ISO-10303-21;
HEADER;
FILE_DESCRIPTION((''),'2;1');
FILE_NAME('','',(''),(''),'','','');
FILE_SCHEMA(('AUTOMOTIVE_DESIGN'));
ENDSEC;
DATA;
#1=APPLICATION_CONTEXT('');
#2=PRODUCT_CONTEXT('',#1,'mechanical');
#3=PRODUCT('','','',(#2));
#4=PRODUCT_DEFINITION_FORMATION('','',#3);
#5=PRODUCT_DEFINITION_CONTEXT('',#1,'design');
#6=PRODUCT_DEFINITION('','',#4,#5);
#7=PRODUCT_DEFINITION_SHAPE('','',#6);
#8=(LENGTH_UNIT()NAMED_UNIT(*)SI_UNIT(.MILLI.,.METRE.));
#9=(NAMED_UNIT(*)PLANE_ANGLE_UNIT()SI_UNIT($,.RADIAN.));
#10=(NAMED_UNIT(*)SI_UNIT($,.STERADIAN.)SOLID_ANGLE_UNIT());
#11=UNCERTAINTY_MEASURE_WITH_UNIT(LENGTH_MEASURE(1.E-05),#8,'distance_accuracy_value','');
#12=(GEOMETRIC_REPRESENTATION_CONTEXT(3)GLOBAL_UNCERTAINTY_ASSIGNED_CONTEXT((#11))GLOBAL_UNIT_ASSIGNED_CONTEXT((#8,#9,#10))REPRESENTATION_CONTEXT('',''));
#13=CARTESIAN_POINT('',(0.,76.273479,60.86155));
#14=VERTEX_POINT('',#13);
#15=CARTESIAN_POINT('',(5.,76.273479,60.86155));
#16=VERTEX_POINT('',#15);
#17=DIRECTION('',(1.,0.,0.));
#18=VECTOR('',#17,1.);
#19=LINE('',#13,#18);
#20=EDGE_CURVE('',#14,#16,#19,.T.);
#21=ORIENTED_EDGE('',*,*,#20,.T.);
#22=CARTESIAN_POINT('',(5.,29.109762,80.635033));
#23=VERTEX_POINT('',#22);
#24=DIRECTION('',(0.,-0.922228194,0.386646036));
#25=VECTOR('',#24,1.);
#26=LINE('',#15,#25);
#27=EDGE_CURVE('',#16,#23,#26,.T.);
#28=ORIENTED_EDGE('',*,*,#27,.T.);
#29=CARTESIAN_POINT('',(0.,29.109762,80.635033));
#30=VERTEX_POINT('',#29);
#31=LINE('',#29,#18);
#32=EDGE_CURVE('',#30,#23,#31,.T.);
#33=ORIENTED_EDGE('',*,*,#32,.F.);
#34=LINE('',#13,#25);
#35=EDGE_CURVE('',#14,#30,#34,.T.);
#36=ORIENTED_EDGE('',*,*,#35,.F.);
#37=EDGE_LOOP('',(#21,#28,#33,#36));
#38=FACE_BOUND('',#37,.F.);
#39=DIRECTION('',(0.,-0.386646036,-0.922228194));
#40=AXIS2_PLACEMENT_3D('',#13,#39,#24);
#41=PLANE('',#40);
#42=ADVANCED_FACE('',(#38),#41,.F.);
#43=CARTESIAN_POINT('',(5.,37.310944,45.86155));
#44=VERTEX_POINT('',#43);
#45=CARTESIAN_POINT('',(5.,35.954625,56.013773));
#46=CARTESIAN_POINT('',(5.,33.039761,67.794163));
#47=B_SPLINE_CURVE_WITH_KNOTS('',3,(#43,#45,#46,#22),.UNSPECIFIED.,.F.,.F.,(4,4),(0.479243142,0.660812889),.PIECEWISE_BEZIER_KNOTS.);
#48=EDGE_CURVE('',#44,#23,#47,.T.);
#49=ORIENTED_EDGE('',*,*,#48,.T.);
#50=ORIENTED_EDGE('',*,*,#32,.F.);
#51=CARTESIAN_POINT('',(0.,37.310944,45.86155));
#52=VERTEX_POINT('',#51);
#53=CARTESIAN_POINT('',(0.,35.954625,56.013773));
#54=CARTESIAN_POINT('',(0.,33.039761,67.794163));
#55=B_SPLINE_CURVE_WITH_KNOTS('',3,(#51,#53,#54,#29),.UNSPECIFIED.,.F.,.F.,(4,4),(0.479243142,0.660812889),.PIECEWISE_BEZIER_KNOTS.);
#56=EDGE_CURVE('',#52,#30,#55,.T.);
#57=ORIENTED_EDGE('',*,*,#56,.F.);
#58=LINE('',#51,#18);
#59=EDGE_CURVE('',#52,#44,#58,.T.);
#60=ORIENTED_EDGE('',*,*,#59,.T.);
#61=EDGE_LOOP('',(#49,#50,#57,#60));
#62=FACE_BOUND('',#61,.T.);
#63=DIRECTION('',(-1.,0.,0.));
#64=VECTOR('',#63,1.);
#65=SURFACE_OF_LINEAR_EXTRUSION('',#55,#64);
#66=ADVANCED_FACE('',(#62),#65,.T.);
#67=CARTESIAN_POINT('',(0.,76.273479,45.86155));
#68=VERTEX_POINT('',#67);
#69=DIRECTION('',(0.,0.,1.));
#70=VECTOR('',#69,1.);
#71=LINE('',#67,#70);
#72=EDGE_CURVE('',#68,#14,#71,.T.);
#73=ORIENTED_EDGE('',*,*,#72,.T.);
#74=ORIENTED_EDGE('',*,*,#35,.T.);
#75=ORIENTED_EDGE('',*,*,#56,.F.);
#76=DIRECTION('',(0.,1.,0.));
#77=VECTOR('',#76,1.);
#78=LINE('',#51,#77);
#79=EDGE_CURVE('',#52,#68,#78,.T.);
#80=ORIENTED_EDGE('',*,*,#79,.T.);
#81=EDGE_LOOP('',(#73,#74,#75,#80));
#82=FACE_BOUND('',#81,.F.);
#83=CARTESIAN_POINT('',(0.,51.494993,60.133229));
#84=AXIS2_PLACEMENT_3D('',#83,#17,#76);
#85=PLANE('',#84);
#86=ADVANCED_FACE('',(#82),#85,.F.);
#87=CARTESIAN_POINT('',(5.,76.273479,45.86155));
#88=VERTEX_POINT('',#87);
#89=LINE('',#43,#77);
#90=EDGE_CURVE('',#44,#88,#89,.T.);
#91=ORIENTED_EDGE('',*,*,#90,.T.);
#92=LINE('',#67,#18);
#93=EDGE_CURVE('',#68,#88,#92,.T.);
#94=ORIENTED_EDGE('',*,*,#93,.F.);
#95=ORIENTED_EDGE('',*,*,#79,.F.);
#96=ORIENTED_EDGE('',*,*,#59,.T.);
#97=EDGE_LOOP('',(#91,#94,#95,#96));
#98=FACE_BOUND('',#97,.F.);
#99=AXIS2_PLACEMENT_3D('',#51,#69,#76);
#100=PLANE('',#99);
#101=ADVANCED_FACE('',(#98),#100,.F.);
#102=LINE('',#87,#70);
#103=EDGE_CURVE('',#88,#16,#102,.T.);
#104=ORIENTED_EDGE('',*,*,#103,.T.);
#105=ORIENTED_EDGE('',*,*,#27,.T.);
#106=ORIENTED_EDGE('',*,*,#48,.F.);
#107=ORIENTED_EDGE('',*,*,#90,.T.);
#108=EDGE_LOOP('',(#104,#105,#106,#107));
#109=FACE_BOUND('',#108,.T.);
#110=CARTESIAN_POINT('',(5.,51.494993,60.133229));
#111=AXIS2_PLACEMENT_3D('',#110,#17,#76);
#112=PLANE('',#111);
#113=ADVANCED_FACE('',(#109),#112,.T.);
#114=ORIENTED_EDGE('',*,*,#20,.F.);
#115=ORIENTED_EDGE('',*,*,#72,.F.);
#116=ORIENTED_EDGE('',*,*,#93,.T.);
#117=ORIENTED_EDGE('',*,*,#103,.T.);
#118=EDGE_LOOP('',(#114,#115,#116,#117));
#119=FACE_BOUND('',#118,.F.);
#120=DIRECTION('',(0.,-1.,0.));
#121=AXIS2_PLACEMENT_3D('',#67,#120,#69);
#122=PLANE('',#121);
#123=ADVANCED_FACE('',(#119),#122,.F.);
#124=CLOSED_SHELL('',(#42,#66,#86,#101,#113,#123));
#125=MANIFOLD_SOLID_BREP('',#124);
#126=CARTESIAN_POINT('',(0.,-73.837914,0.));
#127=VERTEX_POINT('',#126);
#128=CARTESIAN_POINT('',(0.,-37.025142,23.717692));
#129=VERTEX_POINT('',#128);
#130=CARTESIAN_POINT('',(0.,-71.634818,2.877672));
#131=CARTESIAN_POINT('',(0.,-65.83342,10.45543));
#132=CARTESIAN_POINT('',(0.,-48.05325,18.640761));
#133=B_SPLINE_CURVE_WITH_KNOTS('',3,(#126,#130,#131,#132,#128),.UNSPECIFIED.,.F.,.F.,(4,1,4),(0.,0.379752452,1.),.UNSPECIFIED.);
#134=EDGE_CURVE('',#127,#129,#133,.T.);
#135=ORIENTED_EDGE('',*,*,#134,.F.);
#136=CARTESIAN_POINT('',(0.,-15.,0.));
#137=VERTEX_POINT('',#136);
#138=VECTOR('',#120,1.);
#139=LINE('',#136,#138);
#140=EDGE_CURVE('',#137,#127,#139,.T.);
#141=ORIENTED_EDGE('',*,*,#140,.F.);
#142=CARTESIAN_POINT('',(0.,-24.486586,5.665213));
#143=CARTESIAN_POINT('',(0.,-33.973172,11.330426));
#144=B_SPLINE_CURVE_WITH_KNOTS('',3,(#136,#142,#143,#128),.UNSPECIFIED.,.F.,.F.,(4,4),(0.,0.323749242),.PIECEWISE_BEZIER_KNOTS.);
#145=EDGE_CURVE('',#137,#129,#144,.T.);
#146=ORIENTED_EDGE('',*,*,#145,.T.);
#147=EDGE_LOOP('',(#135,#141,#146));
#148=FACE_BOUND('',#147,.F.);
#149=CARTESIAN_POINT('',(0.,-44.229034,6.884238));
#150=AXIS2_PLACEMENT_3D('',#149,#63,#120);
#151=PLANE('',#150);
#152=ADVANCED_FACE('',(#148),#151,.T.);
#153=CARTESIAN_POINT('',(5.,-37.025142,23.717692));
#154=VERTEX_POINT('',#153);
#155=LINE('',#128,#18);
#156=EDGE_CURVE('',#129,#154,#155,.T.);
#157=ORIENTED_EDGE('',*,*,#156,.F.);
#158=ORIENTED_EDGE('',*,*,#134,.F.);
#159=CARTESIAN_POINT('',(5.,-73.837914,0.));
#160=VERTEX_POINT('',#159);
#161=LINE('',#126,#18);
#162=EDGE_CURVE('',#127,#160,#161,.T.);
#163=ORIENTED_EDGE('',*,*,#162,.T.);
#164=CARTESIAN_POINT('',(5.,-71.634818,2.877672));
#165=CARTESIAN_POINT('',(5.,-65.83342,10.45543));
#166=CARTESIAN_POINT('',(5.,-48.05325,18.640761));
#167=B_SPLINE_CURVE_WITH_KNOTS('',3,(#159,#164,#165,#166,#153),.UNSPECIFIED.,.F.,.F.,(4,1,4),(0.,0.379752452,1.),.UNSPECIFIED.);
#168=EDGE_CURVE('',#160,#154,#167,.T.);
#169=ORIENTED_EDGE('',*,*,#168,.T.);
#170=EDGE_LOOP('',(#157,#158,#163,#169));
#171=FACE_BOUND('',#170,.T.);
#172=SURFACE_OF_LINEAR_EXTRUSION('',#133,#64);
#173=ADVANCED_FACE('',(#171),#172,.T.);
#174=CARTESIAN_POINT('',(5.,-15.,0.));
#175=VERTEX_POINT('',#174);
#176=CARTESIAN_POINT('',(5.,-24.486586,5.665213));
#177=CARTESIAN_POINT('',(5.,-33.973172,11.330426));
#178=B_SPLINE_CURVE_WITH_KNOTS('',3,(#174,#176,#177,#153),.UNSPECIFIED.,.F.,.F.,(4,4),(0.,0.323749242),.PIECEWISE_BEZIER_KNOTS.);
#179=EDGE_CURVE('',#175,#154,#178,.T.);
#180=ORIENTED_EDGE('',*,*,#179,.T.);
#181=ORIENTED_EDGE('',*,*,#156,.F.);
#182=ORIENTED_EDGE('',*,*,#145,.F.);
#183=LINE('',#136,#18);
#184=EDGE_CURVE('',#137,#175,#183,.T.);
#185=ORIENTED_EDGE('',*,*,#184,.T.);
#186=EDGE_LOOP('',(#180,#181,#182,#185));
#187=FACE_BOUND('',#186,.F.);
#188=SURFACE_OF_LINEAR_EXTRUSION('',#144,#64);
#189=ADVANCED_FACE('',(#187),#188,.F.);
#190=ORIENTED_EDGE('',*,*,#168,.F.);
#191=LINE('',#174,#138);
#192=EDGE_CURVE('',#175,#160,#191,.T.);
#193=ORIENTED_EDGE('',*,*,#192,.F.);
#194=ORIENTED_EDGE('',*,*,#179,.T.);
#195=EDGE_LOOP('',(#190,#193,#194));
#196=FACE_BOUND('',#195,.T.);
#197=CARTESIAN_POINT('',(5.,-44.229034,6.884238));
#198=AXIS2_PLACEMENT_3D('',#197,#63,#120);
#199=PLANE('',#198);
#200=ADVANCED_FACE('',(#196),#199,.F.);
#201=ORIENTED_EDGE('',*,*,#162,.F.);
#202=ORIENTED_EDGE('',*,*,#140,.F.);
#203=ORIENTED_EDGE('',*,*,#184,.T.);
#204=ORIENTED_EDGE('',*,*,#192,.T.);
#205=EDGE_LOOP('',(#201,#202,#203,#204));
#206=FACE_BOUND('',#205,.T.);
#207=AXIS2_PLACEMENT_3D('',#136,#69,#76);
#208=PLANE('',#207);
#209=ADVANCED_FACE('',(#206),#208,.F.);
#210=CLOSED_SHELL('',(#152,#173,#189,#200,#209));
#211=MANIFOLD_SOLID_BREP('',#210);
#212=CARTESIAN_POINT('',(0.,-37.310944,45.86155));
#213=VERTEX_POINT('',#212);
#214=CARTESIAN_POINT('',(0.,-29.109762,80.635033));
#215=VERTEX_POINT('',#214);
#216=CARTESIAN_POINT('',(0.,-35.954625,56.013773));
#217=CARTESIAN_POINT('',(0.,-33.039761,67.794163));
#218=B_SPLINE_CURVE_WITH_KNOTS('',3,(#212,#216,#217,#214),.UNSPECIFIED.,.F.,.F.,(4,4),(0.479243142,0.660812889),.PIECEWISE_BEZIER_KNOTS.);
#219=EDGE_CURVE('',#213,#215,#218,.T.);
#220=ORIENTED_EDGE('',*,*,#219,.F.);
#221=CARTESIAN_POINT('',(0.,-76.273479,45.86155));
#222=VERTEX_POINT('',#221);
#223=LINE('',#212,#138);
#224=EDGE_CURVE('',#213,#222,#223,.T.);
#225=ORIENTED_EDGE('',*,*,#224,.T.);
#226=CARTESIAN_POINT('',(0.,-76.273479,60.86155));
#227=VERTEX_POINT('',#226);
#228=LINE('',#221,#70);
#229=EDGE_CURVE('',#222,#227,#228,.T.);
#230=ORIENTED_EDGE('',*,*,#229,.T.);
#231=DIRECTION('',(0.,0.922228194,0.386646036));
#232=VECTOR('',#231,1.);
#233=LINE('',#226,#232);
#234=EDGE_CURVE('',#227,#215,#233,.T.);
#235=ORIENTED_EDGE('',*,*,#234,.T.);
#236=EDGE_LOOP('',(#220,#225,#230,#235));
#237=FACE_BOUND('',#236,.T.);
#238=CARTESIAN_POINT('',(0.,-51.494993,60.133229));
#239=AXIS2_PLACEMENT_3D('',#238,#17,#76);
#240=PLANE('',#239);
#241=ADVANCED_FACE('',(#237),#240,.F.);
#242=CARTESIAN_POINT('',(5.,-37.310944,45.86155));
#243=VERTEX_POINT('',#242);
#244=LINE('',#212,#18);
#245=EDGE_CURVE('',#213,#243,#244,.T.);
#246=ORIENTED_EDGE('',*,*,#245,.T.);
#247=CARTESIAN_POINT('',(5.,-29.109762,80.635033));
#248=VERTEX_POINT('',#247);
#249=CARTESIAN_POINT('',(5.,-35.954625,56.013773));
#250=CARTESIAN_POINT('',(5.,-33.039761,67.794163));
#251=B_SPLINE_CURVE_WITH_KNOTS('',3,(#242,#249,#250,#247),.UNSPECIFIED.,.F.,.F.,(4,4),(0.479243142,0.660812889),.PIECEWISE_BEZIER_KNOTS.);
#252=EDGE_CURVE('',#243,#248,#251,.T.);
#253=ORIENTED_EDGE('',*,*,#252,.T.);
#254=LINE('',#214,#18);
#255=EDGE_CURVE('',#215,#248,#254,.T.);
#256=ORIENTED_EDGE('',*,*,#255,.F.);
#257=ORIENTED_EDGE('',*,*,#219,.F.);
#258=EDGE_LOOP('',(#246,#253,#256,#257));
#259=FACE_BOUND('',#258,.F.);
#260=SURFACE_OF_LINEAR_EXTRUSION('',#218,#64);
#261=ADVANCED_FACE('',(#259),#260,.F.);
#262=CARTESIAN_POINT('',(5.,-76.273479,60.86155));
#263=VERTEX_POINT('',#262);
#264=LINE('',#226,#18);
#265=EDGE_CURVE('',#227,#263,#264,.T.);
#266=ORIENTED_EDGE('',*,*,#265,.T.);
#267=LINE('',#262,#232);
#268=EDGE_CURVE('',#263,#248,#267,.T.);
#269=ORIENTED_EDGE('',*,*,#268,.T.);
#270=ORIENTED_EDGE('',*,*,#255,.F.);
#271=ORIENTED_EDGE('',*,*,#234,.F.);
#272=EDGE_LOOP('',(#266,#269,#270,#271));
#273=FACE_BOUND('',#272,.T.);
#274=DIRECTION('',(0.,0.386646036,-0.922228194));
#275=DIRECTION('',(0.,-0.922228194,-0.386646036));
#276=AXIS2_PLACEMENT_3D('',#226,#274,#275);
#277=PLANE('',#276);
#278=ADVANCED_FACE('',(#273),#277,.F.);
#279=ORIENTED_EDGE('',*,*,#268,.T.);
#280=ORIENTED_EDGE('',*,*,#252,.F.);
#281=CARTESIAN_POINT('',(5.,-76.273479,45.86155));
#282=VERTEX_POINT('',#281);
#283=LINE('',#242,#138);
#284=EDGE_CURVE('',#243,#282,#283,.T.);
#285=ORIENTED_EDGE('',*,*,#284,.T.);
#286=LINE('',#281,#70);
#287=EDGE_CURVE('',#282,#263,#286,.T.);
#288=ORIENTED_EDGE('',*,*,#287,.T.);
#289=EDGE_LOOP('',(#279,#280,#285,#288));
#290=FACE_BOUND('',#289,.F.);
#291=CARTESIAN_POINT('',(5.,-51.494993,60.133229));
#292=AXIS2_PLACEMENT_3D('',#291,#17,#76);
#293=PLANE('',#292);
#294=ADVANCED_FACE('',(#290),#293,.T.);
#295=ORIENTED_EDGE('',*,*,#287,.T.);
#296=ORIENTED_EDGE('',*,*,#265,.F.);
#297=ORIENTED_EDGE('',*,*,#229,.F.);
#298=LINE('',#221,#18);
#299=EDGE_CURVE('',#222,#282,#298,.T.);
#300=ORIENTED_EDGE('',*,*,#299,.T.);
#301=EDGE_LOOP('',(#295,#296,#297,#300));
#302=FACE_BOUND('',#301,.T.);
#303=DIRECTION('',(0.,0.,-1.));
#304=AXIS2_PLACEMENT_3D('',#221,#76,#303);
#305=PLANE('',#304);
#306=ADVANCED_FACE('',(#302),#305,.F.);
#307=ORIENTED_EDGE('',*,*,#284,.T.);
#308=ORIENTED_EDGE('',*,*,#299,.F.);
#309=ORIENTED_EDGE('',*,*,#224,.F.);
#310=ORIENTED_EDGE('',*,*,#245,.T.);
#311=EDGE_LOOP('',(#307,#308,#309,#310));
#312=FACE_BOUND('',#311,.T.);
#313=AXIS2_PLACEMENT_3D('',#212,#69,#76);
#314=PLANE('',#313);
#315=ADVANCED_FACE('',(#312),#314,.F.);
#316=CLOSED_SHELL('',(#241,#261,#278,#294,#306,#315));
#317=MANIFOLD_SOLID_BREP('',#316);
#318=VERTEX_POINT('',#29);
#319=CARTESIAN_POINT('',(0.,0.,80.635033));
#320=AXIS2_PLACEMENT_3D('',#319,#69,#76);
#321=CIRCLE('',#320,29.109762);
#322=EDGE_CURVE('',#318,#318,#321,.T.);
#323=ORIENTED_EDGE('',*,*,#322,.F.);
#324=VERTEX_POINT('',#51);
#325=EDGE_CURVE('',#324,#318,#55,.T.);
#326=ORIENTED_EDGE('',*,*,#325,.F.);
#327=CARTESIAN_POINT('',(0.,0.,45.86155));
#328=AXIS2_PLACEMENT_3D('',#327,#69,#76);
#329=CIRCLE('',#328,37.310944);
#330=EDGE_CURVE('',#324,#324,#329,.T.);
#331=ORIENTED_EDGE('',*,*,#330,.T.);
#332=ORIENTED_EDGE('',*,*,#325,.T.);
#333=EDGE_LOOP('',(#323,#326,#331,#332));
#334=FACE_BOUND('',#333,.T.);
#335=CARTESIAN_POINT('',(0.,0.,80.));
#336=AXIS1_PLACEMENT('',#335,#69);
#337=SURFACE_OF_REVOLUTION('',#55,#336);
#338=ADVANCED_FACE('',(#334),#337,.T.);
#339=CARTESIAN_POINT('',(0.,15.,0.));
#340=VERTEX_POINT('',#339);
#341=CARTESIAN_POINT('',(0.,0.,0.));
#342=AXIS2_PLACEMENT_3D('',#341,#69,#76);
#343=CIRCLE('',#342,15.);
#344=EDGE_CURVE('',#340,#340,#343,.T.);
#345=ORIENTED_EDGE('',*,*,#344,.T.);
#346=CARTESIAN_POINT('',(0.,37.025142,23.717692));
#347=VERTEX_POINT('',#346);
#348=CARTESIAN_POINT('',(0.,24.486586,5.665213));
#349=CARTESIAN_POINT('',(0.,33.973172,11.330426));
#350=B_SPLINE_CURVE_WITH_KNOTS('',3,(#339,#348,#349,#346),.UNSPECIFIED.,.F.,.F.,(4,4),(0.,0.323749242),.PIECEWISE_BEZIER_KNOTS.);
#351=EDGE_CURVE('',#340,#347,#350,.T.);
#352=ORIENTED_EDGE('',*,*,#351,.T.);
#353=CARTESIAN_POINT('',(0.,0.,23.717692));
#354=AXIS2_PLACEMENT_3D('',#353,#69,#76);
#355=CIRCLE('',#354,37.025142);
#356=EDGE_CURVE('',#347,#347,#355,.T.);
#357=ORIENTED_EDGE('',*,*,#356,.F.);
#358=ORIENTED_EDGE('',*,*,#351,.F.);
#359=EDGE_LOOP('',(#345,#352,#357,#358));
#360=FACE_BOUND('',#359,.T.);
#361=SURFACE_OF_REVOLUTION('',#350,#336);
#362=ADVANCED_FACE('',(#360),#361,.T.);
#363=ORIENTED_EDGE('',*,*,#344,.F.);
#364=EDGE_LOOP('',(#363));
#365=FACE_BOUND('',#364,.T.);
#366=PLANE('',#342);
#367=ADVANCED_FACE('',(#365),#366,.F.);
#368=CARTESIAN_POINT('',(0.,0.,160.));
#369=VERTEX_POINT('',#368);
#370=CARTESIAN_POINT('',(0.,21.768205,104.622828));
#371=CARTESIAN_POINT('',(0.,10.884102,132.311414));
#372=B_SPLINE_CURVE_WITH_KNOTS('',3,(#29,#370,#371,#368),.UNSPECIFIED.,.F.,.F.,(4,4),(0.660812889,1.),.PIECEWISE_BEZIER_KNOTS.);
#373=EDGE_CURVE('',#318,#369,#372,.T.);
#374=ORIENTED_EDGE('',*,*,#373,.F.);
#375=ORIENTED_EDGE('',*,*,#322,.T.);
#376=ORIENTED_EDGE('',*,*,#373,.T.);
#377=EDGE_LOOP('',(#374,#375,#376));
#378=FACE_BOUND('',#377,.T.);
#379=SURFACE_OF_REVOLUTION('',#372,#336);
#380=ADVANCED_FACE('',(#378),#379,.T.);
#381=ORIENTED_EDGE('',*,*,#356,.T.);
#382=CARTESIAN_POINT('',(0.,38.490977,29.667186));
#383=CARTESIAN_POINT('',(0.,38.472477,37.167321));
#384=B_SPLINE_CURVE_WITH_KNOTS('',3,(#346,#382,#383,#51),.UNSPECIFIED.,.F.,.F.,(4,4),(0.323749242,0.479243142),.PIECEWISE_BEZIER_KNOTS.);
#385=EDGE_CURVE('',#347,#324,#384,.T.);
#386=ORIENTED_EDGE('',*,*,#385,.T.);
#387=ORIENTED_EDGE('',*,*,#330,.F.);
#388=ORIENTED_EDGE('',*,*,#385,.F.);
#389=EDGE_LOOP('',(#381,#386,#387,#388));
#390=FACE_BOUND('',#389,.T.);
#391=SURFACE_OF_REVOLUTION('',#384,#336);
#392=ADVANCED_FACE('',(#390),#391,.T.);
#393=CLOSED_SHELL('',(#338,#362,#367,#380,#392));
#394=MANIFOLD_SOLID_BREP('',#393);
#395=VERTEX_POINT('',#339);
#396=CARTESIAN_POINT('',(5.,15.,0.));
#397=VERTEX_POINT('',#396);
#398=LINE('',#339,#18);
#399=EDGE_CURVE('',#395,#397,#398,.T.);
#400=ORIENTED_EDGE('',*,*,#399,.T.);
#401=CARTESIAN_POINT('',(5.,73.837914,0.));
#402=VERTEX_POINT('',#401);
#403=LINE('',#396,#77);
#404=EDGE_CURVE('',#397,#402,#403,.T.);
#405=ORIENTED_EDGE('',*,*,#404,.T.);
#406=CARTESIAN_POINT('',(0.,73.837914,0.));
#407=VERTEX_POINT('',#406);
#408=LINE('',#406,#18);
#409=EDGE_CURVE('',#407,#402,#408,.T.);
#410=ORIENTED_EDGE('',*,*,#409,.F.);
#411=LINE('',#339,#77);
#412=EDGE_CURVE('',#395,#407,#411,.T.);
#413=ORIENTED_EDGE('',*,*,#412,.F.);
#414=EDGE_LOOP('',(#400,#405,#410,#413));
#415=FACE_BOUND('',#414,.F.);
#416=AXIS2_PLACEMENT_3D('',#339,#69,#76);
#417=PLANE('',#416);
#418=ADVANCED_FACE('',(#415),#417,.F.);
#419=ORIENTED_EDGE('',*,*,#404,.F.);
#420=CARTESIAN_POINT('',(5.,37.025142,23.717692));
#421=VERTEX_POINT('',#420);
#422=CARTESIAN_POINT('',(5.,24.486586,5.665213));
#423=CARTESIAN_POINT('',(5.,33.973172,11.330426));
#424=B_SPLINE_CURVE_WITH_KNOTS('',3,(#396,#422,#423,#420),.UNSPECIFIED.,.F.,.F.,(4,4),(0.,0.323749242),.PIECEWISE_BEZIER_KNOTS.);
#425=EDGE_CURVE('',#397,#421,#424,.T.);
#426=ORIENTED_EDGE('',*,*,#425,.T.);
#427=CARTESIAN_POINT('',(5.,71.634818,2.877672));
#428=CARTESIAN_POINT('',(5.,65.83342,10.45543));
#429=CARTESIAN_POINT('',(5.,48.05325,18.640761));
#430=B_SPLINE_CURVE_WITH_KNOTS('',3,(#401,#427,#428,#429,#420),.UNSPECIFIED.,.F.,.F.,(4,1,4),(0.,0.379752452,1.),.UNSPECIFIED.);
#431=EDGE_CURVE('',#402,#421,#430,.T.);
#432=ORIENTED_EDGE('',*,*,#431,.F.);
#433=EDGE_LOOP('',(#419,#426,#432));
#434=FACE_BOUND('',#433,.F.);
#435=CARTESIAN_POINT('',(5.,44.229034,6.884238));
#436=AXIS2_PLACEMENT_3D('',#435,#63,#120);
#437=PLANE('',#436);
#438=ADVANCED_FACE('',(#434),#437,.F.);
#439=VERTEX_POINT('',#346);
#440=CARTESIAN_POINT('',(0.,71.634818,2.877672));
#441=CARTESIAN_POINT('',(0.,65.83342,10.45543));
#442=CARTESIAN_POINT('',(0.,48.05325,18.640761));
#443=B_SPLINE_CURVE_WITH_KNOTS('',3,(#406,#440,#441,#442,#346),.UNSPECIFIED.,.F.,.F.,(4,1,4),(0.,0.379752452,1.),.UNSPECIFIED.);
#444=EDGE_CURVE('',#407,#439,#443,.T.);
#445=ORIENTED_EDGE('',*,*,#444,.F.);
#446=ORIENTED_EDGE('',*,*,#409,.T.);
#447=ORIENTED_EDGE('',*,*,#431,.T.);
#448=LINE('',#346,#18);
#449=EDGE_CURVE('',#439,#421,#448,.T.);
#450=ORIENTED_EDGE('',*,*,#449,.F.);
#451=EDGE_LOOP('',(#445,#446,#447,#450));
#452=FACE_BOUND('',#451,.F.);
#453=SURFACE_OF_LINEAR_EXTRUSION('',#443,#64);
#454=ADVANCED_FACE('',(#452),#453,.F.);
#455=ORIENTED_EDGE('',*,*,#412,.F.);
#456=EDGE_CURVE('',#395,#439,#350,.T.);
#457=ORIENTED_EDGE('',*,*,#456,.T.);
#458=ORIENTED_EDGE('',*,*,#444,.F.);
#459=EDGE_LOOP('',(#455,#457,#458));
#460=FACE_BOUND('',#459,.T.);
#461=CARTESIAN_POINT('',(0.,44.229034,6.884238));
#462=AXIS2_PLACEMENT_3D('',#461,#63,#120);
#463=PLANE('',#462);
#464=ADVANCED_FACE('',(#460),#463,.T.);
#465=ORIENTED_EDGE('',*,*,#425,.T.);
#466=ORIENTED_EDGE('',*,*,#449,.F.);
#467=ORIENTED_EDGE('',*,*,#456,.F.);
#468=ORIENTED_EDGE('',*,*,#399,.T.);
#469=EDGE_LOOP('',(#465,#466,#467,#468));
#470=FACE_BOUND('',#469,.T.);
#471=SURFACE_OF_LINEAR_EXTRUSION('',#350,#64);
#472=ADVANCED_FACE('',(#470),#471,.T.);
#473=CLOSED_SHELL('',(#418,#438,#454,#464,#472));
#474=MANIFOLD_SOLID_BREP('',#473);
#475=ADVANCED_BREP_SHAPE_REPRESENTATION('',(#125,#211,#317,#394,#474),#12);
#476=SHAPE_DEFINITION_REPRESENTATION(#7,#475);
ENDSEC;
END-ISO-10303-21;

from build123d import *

# Parameters (mm, degrees)
F4_DEPTH = 5
F6_DEPTH = 5


# Not quite as in the source:
# - a feature of the source that left no trace in its solid (it failed there, or was rolled back) is left out
# - the program builds the solid bodies; features that only make, move or delete a surface that nothing else refers to are left out


with BuildPart() as f1:
    # F0 (on Right) → F1 (revolve)
    with BuildSketch(Plane.YZ):
        with BuildLine():
            Line((0, 160), (0, 0))
            Line((0, 0), (15, 0))
            add(Edge.make_bspline(
                [(15, 0), (24.4865858745, 5.6652130966), (33.9731717491, 11.3304261932), (37.0251424611, 23.7176921219)],
                knots=[0, 0, 0, 0, 0.3237492422, 0.3237492422, 0.3237492422, 0.3237492422], degree=3))
            add(Edge.make_bspline(
                [(37.0251424611, 23.7176921219), (38.4909770242, 29.667186483), (38.4724771265, 37.1673213121), (37.3109436119, 45.8615496754)],
                knots=[0.3237492422, 0.3237492422, 0.3237492422, 0.3237492422, 0.4792431423, 0.4792431423, 0.4792431423, 0.4792431423], degree=3))
            add(Edge.make_bspline(
                [(37.3109436119, 45.8615496754), (35.9546245135, 56.0137732894), (33.0397607, 67.794162637), (29.1097623357, 80.6350331336)],
                knots=[0.4792431423, 0.4792431423, 0.4792431423, 0.4792431423, 0.6608128894, 0.6608128894, 0.6608128894, 0.6608128894], degree=3))
            add(Edge.make_bspline(
                [(29.1097623357, 80.6350331336), (21.7682045505, 104.6228275357), (10.8841022753, 132.3114137679), (0, 160)],
                knots=[0.6608128894, 0.6608128894, 0.6608128894, 0.6608128894, 1, 1, 1, 1], degree=3))
        make_face()
    revolve(axis=Axis((0, 0, 80), (0, 0, 1)))


with BuildPart() as f4:
    # F0 (on Right) → F4 (new body)
    with BuildSketch(Plane.YZ):
        with BuildLine():
            Line((76.2734785671, 60.8615496754), (29.1097623357, 80.6350331336))
            add(Edge.make_bspline(
                [(37.3109436119, 45.8615496754), (35.9546245135, 56.0137732894), (33.0397607, 67.794162637), (29.1097623357, 80.6350331336)],
                knots=[0.4792431423, 0.4792431423, 0.4792431423, 0.4792431423, 0.6608128894, 0.6608128894, 0.6608128894, 0.6608128894], degree=3))
            Line((37.3109436119, 45.8615496754), (76.2734785671, 45.8615496754))
            Line((76.2734785671, 45.8615496754), (76.2734785671, 60.8615496754))
        make_face()
    extrude(amount=F4_DEPTH)


with BuildPart() as f5_1:
    # F5: instance of F4
    add(f4.part.mirror(Plane.XZ))


with BuildPart() as f6:
    # F0 (on Right) → F6 (new body)
    with BuildSketch(Plane.YZ):
        with BuildLine():
            add(Edge.make_bspline(
                [(15, 0), (24.4865858745, 5.6652130966), (33.9731717491, 11.3304261932), (37.0251424611, 23.7176921219)],
                knots=[0, 0, 0, 0, 0.3237492422, 0.3237492422, 0.3237492422, 0.3237492422], degree=3))
            Line((15, 0), (73.8379135728, 0))
            add(Edge.make_bspline(
                [(73.8379135728, 0), (71.6348183096, 2.8776720373), (65.8334199202, 10.4554296596), (48.053249542, 18.640760647), (37.0251424611, 23.7176921219)],
                knots=[0, 0, 0, 0, 0.379752452, 1, 1, 1, 1], degree=3))
        make_face()
    extrude(amount=F6_DEPTH)


with BuildPart() as f7_1:
    # F7: instance of F6
    add(f6.part.mirror(Plane.XZ))


solid = Compound([f1.part, f4.part, f5_1.part, f6.part, f7_1.part])
